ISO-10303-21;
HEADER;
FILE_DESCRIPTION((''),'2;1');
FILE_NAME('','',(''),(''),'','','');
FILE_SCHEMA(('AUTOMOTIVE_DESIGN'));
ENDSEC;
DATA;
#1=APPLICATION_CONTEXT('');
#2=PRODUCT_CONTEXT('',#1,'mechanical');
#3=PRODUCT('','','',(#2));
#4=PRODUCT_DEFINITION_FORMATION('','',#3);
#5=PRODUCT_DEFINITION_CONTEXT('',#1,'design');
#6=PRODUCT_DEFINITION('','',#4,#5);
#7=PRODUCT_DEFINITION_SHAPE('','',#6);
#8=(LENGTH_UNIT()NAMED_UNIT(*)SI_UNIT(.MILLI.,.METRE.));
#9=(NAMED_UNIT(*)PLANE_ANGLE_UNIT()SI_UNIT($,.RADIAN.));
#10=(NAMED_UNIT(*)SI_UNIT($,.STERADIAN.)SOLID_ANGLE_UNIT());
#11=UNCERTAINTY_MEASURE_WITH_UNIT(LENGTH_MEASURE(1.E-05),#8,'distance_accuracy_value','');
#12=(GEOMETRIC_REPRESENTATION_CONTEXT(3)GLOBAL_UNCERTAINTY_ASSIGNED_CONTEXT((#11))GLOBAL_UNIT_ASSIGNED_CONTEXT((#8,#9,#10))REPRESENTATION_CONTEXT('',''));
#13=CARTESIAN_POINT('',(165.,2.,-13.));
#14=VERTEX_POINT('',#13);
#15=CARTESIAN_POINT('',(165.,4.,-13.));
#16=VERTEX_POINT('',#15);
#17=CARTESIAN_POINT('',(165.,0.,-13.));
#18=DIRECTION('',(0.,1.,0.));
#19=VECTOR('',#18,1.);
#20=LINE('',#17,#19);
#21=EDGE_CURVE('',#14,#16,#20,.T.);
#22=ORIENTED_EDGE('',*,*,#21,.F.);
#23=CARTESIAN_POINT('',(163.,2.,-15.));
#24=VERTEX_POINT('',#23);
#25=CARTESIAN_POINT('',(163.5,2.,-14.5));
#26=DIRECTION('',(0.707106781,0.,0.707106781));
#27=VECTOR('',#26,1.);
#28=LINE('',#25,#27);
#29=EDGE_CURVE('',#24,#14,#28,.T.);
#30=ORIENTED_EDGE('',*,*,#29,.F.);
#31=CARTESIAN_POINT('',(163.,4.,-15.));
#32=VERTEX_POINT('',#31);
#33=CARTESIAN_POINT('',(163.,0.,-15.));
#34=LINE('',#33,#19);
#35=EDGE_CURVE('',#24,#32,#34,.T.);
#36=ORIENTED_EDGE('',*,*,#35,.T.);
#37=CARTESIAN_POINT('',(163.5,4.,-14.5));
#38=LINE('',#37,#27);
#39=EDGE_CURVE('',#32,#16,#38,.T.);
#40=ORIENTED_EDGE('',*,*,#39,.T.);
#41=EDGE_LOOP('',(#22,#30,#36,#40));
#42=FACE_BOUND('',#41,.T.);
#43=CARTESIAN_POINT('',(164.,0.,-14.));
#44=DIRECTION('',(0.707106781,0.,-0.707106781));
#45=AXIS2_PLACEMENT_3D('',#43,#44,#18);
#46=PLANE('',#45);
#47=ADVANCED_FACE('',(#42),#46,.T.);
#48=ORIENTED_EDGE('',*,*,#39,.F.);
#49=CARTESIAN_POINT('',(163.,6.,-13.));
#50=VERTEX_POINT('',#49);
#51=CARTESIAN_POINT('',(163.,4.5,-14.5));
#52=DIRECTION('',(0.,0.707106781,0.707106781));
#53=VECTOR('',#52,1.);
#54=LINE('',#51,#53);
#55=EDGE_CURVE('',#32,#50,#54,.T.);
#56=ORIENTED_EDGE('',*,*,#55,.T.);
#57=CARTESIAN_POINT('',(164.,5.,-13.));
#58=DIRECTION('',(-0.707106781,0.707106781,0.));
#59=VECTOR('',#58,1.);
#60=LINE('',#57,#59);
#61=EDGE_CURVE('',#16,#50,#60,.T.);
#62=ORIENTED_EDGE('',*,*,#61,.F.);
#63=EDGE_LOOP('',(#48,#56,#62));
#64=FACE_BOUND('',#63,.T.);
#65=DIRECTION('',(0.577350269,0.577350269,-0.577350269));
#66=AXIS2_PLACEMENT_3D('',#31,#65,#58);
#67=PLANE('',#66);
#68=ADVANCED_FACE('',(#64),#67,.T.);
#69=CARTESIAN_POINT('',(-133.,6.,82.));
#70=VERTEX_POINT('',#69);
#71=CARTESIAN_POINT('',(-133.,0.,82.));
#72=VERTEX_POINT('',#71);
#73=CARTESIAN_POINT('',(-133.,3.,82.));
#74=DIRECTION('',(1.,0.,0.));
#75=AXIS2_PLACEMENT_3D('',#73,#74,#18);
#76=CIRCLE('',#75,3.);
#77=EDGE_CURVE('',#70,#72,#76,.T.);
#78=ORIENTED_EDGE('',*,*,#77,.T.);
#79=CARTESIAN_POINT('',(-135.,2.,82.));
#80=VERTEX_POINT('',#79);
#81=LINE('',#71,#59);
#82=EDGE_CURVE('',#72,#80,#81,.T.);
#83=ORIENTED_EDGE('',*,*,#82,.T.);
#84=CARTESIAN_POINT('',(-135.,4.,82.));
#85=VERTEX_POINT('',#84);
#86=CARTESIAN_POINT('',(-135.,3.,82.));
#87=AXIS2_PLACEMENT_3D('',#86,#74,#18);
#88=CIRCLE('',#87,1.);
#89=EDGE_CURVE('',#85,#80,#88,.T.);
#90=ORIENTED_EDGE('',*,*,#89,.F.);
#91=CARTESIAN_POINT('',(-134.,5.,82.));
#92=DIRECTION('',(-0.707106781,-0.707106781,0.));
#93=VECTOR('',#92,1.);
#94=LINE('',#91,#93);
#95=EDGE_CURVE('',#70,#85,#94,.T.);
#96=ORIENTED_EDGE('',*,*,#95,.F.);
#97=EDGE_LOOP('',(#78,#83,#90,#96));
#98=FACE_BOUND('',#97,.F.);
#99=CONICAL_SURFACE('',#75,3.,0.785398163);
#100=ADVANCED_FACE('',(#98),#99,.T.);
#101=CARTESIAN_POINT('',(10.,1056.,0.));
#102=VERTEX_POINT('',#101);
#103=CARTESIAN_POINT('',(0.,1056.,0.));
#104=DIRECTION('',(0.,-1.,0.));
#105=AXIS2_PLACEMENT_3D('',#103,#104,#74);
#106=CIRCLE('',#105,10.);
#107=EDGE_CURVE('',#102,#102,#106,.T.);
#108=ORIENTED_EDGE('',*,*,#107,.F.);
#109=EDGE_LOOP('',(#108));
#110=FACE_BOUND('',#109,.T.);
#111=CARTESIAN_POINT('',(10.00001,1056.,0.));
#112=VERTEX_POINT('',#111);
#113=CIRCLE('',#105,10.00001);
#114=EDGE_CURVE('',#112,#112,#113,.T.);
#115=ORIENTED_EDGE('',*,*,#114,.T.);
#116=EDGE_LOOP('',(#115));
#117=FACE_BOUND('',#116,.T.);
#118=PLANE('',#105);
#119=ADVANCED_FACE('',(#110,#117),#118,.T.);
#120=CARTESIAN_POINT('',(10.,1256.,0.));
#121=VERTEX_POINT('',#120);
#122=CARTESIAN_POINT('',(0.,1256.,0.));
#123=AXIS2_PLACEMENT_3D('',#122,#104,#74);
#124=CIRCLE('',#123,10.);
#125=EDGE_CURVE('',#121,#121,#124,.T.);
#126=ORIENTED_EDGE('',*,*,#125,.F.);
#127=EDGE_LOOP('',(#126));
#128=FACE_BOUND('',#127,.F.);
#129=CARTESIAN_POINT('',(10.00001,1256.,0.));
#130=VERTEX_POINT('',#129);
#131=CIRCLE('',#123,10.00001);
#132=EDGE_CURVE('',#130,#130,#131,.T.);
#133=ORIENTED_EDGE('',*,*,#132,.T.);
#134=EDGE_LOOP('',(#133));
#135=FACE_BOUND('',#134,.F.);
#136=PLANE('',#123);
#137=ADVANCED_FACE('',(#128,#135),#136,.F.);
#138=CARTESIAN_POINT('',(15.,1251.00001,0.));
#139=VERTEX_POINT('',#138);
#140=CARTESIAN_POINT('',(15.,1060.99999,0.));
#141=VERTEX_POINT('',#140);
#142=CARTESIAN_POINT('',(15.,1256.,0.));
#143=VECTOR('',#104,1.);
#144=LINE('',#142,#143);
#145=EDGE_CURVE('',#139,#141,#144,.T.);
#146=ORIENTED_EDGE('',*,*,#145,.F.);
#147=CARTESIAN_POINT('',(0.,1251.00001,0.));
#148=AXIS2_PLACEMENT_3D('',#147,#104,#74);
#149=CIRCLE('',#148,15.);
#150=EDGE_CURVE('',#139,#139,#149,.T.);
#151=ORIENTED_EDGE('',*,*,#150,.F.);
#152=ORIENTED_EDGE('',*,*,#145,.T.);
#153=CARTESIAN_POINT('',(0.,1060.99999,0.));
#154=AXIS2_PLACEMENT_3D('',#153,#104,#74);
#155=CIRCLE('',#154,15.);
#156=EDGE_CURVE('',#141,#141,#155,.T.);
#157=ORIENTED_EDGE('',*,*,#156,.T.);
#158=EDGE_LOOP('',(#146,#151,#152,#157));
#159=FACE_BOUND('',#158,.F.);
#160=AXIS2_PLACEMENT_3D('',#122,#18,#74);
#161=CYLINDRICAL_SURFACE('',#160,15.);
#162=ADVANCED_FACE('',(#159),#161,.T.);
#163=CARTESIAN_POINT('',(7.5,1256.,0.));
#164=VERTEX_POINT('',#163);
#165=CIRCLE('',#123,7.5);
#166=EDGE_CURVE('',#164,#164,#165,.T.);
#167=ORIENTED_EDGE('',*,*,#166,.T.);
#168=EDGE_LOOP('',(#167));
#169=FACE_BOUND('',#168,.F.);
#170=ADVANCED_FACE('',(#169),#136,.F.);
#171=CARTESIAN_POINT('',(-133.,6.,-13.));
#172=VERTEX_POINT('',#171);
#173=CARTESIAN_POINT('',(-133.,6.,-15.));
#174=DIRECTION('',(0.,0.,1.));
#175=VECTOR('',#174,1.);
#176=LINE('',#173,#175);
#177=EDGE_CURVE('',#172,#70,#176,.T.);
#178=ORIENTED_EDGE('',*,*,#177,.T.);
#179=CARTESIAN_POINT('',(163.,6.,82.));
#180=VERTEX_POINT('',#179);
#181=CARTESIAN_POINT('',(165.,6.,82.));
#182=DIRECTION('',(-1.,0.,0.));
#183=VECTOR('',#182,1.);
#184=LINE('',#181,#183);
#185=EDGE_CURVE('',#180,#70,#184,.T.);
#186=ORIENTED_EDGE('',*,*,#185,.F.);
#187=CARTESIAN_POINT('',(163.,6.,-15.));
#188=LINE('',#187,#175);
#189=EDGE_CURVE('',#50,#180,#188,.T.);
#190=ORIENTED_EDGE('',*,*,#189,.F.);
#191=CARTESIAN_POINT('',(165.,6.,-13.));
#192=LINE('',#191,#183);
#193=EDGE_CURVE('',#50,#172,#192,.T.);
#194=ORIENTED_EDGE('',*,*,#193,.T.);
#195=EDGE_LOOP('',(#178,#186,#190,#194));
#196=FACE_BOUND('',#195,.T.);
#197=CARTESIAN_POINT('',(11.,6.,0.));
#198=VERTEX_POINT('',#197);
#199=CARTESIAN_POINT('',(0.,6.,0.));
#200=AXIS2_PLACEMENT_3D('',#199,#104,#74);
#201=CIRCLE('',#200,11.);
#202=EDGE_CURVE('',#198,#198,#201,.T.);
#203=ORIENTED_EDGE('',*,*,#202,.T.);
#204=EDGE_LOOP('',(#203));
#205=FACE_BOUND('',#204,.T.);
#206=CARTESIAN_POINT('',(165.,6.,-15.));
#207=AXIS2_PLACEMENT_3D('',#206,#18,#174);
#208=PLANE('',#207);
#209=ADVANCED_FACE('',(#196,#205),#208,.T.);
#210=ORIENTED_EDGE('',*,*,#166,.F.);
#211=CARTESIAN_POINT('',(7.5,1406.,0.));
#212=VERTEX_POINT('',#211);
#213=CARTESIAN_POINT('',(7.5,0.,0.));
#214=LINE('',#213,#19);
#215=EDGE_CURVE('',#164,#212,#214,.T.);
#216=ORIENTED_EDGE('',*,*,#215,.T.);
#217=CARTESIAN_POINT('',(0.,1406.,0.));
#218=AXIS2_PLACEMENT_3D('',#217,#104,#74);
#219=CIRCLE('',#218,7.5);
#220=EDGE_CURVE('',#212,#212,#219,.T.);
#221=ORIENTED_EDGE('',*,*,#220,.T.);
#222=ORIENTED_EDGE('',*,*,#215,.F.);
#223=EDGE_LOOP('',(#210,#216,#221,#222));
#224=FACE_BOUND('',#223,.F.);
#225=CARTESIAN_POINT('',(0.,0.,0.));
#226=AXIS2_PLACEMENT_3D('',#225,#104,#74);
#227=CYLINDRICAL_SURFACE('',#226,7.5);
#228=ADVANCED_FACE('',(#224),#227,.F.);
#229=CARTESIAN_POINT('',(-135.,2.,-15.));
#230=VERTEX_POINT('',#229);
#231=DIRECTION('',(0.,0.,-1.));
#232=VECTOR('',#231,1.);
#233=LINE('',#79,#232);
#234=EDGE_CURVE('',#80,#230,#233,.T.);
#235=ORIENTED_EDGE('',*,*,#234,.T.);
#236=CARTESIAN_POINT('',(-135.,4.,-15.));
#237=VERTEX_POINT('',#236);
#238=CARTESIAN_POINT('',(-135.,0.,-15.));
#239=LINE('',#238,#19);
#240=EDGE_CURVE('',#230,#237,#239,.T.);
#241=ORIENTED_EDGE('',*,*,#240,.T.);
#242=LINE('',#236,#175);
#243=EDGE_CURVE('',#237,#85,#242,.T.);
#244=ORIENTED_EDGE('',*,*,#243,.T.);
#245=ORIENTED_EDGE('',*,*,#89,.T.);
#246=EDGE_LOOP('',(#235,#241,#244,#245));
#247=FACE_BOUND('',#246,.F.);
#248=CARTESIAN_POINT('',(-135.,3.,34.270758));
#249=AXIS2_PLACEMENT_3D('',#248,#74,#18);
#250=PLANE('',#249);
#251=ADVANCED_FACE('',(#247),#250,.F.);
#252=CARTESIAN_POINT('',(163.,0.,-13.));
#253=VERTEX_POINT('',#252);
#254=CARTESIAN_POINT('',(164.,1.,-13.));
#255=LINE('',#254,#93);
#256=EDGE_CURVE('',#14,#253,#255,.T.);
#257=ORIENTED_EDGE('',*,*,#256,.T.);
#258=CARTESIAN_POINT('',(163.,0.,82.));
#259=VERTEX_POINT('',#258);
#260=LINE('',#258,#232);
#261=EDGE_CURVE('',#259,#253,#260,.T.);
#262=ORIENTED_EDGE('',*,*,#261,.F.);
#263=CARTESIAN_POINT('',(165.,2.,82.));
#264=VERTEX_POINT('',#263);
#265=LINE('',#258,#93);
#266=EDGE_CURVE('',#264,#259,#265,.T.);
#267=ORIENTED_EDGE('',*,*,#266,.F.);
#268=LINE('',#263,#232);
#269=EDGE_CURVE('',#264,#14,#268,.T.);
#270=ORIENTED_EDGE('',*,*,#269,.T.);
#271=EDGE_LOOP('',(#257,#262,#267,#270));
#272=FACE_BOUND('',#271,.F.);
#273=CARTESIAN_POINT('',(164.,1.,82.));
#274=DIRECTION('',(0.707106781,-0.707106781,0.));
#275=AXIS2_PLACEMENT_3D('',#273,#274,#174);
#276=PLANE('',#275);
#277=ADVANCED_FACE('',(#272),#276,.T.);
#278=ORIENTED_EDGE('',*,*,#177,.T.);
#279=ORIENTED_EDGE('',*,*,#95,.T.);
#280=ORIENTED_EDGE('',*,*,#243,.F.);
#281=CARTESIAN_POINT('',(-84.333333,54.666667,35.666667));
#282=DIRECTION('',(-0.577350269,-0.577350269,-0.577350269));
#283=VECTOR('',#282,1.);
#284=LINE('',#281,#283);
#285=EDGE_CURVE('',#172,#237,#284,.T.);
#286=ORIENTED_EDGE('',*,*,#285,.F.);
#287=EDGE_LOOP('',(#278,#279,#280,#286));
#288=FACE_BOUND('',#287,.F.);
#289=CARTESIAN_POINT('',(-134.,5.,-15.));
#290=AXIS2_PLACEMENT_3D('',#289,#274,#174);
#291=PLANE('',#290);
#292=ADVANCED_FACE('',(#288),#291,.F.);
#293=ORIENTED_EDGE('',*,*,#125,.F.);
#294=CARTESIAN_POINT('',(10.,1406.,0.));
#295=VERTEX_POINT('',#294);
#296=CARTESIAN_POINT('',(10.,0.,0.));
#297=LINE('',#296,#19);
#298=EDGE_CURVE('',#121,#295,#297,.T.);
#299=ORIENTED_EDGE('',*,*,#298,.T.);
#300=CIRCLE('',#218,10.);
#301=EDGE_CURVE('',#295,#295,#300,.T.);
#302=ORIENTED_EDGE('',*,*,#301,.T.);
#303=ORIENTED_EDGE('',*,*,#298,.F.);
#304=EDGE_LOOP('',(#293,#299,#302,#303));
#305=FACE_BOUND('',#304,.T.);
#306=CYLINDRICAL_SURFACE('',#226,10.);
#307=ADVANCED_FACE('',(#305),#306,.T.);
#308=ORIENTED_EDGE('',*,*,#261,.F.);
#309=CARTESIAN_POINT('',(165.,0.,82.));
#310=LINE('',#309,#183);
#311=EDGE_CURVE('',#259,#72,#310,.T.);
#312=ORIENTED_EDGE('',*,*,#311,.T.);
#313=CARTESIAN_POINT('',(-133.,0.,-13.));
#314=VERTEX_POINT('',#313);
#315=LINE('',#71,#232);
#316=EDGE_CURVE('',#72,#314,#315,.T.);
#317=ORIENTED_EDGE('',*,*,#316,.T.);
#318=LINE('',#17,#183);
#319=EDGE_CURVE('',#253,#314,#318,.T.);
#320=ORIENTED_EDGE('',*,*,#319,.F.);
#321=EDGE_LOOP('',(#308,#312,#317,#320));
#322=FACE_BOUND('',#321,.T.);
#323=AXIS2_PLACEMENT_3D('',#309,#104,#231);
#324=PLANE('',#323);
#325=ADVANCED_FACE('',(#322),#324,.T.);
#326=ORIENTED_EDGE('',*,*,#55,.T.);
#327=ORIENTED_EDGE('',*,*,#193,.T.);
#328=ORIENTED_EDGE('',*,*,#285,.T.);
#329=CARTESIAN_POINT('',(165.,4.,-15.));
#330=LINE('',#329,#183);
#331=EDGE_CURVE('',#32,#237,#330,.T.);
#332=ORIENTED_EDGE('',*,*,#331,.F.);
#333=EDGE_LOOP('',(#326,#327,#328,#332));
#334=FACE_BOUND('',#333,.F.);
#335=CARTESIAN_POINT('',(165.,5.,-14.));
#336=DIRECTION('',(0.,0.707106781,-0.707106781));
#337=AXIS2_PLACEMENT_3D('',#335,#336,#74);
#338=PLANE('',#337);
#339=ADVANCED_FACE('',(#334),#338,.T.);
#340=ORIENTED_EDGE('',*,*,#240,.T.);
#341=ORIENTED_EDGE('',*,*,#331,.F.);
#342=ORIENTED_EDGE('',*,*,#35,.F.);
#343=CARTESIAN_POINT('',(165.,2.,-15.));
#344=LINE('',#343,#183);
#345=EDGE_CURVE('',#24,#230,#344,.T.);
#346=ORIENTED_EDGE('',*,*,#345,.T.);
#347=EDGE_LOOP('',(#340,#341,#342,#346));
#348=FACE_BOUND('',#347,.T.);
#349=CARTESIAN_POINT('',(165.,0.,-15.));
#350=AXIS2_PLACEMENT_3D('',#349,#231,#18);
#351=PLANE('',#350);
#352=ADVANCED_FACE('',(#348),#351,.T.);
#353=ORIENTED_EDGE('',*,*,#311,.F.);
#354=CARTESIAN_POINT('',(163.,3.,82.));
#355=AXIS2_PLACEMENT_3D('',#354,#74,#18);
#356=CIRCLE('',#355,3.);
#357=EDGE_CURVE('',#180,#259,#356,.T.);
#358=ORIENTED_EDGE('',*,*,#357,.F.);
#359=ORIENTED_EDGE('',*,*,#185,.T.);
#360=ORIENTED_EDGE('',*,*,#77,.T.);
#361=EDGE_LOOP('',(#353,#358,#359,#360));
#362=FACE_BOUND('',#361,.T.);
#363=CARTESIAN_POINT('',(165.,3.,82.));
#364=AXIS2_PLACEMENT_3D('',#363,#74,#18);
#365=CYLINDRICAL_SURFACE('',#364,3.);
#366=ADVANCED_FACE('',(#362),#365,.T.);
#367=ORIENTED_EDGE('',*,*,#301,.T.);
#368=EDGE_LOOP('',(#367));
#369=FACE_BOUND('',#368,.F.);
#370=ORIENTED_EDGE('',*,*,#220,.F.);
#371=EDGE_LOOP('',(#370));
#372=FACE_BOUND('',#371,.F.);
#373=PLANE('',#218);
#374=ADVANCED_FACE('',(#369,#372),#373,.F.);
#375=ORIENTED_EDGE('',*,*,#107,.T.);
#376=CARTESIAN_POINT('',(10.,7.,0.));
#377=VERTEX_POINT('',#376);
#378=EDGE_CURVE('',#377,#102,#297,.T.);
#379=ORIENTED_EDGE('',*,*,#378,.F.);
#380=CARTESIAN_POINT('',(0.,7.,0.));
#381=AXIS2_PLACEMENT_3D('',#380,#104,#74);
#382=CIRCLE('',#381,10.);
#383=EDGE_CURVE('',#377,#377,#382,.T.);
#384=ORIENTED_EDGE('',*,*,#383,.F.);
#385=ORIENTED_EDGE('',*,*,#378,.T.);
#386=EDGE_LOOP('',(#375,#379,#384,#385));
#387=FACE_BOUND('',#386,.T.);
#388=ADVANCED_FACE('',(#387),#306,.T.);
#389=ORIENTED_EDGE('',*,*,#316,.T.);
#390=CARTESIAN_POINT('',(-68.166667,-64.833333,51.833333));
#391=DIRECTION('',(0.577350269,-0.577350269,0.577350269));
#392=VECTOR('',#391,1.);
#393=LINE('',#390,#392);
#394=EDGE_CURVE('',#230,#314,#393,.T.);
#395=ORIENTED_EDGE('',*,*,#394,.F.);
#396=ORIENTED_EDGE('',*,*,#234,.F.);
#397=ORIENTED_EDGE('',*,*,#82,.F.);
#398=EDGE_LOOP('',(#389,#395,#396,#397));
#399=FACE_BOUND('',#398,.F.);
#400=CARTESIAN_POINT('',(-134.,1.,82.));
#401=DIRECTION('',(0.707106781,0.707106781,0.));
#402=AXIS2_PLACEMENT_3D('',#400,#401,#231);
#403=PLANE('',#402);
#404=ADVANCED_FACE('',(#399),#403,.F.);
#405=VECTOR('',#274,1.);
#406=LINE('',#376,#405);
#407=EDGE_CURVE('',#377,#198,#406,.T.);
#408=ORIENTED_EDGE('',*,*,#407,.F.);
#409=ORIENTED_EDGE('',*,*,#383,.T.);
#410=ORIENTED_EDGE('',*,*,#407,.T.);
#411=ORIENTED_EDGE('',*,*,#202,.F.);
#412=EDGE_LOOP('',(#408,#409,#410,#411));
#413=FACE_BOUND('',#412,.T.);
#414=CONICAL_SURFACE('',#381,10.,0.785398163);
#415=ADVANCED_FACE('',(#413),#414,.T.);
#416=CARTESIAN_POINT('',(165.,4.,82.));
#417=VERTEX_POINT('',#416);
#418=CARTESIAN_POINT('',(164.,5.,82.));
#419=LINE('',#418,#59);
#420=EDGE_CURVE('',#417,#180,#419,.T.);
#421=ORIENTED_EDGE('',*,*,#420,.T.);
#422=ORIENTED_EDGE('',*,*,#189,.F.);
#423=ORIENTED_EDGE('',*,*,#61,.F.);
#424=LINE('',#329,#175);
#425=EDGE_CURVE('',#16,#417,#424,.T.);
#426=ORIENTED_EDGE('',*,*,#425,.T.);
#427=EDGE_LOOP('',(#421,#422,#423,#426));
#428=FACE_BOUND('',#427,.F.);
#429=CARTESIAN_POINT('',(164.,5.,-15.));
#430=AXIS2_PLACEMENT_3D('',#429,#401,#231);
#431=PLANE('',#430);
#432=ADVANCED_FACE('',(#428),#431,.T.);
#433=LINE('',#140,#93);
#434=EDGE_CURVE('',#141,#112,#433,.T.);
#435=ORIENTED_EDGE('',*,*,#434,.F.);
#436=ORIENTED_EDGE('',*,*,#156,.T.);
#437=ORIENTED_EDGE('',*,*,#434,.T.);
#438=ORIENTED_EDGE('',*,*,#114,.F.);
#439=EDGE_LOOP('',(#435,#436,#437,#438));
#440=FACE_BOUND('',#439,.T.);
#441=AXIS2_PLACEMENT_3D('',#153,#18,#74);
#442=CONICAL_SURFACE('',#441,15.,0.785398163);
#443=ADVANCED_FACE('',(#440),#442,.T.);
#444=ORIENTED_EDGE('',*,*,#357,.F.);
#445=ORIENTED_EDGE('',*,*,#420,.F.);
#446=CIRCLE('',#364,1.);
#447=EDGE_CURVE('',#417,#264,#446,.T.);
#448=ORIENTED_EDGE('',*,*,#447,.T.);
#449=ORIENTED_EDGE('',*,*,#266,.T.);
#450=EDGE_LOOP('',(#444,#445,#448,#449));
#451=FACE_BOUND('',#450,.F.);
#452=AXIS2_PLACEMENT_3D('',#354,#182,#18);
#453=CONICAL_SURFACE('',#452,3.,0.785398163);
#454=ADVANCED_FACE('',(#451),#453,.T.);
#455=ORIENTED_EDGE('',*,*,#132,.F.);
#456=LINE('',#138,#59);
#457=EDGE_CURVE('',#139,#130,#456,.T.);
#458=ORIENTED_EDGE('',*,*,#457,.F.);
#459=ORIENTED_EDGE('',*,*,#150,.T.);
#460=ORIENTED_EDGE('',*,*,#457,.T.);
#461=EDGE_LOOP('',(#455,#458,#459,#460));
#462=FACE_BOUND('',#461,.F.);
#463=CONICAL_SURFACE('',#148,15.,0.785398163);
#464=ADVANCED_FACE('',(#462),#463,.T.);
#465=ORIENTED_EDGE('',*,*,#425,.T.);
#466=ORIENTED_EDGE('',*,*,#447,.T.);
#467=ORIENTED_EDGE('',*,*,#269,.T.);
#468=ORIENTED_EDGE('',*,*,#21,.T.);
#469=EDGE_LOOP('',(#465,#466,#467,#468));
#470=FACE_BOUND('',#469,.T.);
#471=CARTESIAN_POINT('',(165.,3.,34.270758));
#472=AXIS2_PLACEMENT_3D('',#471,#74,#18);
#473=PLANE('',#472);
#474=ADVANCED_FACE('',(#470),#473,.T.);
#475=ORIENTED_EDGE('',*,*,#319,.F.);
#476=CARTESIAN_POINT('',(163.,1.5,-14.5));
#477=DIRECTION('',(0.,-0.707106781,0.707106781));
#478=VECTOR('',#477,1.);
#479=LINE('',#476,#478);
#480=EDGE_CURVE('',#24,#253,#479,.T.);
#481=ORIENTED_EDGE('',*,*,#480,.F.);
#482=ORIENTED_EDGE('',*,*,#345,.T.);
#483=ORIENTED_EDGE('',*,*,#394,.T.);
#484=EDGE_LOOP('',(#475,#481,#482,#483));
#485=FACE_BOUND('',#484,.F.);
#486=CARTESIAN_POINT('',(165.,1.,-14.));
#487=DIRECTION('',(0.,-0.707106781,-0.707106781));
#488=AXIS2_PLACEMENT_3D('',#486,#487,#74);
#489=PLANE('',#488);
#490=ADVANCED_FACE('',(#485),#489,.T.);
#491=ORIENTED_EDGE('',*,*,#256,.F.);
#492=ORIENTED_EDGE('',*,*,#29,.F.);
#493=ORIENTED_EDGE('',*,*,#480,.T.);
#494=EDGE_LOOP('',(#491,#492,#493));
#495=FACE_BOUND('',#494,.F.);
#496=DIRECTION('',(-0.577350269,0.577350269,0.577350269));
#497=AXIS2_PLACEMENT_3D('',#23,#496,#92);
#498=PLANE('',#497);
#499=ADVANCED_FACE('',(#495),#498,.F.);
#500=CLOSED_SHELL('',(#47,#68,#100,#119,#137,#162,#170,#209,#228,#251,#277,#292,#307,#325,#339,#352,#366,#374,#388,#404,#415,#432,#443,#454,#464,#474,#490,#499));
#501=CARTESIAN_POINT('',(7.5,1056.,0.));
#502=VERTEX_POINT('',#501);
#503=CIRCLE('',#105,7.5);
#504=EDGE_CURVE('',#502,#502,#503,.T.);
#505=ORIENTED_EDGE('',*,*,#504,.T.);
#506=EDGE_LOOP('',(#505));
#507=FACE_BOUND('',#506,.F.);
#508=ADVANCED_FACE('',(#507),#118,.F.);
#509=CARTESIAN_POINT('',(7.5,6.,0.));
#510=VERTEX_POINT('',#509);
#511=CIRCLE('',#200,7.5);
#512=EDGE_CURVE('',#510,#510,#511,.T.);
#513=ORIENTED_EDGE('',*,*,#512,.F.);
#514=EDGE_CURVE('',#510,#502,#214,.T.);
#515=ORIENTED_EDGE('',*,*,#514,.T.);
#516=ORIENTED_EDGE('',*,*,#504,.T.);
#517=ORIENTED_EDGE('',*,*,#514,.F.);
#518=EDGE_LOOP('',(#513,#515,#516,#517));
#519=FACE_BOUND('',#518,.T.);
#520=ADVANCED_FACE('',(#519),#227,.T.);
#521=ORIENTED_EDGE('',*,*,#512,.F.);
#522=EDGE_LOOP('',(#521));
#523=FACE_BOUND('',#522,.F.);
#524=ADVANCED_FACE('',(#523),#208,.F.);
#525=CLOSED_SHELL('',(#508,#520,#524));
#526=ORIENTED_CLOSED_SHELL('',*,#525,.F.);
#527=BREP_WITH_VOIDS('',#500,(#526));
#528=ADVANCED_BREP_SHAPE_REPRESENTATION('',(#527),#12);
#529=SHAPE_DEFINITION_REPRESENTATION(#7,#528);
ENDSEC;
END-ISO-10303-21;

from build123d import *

# Parameters (mm, degrees)
F0_R     = 10
F1_DEPTH = 1406
F2_R     = 7.5
F3_DEPTH = 1800
F6_DEPTH = 300
F8_R     = 15
F9_DEPTH = 200
F10_SIZE = 4.99999
F11_SIZE = 1
F12_SIZE = 2


# Not quite as in the source:
# - a fillet or chamfer is up to 0.001 mm smaller than in the source, because OpenCascade refuses the exact size
# - a feature names something its author has since deleted; it is built from what else it names


with BuildPart() as f1:
    # F0 (on Front) → F1 (new body)
    with BuildSketch(Plane.XZ):
        Circle(F0_R)
    extrude(amount=-F1_DEPTH)

    # F2 (on Front) → F3 (cut)
    with BuildSketch(Plane.XZ):
        Circle(F2_R)
    extrude(amount=-F3_DEPTH, mode=Mode.SUBTRACT)

    # F5 (on offset) → F6 (join)
    with BuildSketch(Plane.YZ.offset(165)):
        with BuildLine():
            Line((0, 82), (0, -15))
            Line((0, -15), (6, -15))
            Line((6, -15), (6, 82))
            ThreePointArc((6, 82), (3, 85), (0, 82))
        make_face()
    extrude(amount=-F6_DEPTH)

    # F8 (on offset) → F9 (join)
    with BuildSketch(Plane.XZ.offset(-1256)):
        Circle(F8_R)
    extrude(amount=F9_DEPTH)

    # F10 (size 5 in the source; OpenCascade refuses exactly that, so slightly less here)
    f10_edges = [f1.edges().sort_by_distance(p)[0] for p in [
        (15, 1156, 0),
        (-15, 1256, 0),
        (-15, 1056, 0),
    ]]
    chamfer(f10_edges, length=F10_SIZE)

    # F11
    f11_edges = [f1.edges().sort_by_distance(p)[0] for p in [
        (-10, 6, 0),
    ]]
    chamfer(f11_edges, length=F11_SIZE)

    # F12
    f12_edges = [f1.edges().sort_by_distance(p)[0] for p in [
        (165, 0, 33.5),
        (165, 3, -15),
        (165, 6, 33.5),
        (165, 3, 85),
        (15, 0, -15),
        (15, 6, -15),
        (15, 6, 82),
        (-135, 6, 33.5),
        (-135, 0, 33.5),
        (15, 0, 82),
        (-135, 3, 85),
    ]]
    chamfer(f12_edges, length=F12_SIZE)


solid = f1.part
